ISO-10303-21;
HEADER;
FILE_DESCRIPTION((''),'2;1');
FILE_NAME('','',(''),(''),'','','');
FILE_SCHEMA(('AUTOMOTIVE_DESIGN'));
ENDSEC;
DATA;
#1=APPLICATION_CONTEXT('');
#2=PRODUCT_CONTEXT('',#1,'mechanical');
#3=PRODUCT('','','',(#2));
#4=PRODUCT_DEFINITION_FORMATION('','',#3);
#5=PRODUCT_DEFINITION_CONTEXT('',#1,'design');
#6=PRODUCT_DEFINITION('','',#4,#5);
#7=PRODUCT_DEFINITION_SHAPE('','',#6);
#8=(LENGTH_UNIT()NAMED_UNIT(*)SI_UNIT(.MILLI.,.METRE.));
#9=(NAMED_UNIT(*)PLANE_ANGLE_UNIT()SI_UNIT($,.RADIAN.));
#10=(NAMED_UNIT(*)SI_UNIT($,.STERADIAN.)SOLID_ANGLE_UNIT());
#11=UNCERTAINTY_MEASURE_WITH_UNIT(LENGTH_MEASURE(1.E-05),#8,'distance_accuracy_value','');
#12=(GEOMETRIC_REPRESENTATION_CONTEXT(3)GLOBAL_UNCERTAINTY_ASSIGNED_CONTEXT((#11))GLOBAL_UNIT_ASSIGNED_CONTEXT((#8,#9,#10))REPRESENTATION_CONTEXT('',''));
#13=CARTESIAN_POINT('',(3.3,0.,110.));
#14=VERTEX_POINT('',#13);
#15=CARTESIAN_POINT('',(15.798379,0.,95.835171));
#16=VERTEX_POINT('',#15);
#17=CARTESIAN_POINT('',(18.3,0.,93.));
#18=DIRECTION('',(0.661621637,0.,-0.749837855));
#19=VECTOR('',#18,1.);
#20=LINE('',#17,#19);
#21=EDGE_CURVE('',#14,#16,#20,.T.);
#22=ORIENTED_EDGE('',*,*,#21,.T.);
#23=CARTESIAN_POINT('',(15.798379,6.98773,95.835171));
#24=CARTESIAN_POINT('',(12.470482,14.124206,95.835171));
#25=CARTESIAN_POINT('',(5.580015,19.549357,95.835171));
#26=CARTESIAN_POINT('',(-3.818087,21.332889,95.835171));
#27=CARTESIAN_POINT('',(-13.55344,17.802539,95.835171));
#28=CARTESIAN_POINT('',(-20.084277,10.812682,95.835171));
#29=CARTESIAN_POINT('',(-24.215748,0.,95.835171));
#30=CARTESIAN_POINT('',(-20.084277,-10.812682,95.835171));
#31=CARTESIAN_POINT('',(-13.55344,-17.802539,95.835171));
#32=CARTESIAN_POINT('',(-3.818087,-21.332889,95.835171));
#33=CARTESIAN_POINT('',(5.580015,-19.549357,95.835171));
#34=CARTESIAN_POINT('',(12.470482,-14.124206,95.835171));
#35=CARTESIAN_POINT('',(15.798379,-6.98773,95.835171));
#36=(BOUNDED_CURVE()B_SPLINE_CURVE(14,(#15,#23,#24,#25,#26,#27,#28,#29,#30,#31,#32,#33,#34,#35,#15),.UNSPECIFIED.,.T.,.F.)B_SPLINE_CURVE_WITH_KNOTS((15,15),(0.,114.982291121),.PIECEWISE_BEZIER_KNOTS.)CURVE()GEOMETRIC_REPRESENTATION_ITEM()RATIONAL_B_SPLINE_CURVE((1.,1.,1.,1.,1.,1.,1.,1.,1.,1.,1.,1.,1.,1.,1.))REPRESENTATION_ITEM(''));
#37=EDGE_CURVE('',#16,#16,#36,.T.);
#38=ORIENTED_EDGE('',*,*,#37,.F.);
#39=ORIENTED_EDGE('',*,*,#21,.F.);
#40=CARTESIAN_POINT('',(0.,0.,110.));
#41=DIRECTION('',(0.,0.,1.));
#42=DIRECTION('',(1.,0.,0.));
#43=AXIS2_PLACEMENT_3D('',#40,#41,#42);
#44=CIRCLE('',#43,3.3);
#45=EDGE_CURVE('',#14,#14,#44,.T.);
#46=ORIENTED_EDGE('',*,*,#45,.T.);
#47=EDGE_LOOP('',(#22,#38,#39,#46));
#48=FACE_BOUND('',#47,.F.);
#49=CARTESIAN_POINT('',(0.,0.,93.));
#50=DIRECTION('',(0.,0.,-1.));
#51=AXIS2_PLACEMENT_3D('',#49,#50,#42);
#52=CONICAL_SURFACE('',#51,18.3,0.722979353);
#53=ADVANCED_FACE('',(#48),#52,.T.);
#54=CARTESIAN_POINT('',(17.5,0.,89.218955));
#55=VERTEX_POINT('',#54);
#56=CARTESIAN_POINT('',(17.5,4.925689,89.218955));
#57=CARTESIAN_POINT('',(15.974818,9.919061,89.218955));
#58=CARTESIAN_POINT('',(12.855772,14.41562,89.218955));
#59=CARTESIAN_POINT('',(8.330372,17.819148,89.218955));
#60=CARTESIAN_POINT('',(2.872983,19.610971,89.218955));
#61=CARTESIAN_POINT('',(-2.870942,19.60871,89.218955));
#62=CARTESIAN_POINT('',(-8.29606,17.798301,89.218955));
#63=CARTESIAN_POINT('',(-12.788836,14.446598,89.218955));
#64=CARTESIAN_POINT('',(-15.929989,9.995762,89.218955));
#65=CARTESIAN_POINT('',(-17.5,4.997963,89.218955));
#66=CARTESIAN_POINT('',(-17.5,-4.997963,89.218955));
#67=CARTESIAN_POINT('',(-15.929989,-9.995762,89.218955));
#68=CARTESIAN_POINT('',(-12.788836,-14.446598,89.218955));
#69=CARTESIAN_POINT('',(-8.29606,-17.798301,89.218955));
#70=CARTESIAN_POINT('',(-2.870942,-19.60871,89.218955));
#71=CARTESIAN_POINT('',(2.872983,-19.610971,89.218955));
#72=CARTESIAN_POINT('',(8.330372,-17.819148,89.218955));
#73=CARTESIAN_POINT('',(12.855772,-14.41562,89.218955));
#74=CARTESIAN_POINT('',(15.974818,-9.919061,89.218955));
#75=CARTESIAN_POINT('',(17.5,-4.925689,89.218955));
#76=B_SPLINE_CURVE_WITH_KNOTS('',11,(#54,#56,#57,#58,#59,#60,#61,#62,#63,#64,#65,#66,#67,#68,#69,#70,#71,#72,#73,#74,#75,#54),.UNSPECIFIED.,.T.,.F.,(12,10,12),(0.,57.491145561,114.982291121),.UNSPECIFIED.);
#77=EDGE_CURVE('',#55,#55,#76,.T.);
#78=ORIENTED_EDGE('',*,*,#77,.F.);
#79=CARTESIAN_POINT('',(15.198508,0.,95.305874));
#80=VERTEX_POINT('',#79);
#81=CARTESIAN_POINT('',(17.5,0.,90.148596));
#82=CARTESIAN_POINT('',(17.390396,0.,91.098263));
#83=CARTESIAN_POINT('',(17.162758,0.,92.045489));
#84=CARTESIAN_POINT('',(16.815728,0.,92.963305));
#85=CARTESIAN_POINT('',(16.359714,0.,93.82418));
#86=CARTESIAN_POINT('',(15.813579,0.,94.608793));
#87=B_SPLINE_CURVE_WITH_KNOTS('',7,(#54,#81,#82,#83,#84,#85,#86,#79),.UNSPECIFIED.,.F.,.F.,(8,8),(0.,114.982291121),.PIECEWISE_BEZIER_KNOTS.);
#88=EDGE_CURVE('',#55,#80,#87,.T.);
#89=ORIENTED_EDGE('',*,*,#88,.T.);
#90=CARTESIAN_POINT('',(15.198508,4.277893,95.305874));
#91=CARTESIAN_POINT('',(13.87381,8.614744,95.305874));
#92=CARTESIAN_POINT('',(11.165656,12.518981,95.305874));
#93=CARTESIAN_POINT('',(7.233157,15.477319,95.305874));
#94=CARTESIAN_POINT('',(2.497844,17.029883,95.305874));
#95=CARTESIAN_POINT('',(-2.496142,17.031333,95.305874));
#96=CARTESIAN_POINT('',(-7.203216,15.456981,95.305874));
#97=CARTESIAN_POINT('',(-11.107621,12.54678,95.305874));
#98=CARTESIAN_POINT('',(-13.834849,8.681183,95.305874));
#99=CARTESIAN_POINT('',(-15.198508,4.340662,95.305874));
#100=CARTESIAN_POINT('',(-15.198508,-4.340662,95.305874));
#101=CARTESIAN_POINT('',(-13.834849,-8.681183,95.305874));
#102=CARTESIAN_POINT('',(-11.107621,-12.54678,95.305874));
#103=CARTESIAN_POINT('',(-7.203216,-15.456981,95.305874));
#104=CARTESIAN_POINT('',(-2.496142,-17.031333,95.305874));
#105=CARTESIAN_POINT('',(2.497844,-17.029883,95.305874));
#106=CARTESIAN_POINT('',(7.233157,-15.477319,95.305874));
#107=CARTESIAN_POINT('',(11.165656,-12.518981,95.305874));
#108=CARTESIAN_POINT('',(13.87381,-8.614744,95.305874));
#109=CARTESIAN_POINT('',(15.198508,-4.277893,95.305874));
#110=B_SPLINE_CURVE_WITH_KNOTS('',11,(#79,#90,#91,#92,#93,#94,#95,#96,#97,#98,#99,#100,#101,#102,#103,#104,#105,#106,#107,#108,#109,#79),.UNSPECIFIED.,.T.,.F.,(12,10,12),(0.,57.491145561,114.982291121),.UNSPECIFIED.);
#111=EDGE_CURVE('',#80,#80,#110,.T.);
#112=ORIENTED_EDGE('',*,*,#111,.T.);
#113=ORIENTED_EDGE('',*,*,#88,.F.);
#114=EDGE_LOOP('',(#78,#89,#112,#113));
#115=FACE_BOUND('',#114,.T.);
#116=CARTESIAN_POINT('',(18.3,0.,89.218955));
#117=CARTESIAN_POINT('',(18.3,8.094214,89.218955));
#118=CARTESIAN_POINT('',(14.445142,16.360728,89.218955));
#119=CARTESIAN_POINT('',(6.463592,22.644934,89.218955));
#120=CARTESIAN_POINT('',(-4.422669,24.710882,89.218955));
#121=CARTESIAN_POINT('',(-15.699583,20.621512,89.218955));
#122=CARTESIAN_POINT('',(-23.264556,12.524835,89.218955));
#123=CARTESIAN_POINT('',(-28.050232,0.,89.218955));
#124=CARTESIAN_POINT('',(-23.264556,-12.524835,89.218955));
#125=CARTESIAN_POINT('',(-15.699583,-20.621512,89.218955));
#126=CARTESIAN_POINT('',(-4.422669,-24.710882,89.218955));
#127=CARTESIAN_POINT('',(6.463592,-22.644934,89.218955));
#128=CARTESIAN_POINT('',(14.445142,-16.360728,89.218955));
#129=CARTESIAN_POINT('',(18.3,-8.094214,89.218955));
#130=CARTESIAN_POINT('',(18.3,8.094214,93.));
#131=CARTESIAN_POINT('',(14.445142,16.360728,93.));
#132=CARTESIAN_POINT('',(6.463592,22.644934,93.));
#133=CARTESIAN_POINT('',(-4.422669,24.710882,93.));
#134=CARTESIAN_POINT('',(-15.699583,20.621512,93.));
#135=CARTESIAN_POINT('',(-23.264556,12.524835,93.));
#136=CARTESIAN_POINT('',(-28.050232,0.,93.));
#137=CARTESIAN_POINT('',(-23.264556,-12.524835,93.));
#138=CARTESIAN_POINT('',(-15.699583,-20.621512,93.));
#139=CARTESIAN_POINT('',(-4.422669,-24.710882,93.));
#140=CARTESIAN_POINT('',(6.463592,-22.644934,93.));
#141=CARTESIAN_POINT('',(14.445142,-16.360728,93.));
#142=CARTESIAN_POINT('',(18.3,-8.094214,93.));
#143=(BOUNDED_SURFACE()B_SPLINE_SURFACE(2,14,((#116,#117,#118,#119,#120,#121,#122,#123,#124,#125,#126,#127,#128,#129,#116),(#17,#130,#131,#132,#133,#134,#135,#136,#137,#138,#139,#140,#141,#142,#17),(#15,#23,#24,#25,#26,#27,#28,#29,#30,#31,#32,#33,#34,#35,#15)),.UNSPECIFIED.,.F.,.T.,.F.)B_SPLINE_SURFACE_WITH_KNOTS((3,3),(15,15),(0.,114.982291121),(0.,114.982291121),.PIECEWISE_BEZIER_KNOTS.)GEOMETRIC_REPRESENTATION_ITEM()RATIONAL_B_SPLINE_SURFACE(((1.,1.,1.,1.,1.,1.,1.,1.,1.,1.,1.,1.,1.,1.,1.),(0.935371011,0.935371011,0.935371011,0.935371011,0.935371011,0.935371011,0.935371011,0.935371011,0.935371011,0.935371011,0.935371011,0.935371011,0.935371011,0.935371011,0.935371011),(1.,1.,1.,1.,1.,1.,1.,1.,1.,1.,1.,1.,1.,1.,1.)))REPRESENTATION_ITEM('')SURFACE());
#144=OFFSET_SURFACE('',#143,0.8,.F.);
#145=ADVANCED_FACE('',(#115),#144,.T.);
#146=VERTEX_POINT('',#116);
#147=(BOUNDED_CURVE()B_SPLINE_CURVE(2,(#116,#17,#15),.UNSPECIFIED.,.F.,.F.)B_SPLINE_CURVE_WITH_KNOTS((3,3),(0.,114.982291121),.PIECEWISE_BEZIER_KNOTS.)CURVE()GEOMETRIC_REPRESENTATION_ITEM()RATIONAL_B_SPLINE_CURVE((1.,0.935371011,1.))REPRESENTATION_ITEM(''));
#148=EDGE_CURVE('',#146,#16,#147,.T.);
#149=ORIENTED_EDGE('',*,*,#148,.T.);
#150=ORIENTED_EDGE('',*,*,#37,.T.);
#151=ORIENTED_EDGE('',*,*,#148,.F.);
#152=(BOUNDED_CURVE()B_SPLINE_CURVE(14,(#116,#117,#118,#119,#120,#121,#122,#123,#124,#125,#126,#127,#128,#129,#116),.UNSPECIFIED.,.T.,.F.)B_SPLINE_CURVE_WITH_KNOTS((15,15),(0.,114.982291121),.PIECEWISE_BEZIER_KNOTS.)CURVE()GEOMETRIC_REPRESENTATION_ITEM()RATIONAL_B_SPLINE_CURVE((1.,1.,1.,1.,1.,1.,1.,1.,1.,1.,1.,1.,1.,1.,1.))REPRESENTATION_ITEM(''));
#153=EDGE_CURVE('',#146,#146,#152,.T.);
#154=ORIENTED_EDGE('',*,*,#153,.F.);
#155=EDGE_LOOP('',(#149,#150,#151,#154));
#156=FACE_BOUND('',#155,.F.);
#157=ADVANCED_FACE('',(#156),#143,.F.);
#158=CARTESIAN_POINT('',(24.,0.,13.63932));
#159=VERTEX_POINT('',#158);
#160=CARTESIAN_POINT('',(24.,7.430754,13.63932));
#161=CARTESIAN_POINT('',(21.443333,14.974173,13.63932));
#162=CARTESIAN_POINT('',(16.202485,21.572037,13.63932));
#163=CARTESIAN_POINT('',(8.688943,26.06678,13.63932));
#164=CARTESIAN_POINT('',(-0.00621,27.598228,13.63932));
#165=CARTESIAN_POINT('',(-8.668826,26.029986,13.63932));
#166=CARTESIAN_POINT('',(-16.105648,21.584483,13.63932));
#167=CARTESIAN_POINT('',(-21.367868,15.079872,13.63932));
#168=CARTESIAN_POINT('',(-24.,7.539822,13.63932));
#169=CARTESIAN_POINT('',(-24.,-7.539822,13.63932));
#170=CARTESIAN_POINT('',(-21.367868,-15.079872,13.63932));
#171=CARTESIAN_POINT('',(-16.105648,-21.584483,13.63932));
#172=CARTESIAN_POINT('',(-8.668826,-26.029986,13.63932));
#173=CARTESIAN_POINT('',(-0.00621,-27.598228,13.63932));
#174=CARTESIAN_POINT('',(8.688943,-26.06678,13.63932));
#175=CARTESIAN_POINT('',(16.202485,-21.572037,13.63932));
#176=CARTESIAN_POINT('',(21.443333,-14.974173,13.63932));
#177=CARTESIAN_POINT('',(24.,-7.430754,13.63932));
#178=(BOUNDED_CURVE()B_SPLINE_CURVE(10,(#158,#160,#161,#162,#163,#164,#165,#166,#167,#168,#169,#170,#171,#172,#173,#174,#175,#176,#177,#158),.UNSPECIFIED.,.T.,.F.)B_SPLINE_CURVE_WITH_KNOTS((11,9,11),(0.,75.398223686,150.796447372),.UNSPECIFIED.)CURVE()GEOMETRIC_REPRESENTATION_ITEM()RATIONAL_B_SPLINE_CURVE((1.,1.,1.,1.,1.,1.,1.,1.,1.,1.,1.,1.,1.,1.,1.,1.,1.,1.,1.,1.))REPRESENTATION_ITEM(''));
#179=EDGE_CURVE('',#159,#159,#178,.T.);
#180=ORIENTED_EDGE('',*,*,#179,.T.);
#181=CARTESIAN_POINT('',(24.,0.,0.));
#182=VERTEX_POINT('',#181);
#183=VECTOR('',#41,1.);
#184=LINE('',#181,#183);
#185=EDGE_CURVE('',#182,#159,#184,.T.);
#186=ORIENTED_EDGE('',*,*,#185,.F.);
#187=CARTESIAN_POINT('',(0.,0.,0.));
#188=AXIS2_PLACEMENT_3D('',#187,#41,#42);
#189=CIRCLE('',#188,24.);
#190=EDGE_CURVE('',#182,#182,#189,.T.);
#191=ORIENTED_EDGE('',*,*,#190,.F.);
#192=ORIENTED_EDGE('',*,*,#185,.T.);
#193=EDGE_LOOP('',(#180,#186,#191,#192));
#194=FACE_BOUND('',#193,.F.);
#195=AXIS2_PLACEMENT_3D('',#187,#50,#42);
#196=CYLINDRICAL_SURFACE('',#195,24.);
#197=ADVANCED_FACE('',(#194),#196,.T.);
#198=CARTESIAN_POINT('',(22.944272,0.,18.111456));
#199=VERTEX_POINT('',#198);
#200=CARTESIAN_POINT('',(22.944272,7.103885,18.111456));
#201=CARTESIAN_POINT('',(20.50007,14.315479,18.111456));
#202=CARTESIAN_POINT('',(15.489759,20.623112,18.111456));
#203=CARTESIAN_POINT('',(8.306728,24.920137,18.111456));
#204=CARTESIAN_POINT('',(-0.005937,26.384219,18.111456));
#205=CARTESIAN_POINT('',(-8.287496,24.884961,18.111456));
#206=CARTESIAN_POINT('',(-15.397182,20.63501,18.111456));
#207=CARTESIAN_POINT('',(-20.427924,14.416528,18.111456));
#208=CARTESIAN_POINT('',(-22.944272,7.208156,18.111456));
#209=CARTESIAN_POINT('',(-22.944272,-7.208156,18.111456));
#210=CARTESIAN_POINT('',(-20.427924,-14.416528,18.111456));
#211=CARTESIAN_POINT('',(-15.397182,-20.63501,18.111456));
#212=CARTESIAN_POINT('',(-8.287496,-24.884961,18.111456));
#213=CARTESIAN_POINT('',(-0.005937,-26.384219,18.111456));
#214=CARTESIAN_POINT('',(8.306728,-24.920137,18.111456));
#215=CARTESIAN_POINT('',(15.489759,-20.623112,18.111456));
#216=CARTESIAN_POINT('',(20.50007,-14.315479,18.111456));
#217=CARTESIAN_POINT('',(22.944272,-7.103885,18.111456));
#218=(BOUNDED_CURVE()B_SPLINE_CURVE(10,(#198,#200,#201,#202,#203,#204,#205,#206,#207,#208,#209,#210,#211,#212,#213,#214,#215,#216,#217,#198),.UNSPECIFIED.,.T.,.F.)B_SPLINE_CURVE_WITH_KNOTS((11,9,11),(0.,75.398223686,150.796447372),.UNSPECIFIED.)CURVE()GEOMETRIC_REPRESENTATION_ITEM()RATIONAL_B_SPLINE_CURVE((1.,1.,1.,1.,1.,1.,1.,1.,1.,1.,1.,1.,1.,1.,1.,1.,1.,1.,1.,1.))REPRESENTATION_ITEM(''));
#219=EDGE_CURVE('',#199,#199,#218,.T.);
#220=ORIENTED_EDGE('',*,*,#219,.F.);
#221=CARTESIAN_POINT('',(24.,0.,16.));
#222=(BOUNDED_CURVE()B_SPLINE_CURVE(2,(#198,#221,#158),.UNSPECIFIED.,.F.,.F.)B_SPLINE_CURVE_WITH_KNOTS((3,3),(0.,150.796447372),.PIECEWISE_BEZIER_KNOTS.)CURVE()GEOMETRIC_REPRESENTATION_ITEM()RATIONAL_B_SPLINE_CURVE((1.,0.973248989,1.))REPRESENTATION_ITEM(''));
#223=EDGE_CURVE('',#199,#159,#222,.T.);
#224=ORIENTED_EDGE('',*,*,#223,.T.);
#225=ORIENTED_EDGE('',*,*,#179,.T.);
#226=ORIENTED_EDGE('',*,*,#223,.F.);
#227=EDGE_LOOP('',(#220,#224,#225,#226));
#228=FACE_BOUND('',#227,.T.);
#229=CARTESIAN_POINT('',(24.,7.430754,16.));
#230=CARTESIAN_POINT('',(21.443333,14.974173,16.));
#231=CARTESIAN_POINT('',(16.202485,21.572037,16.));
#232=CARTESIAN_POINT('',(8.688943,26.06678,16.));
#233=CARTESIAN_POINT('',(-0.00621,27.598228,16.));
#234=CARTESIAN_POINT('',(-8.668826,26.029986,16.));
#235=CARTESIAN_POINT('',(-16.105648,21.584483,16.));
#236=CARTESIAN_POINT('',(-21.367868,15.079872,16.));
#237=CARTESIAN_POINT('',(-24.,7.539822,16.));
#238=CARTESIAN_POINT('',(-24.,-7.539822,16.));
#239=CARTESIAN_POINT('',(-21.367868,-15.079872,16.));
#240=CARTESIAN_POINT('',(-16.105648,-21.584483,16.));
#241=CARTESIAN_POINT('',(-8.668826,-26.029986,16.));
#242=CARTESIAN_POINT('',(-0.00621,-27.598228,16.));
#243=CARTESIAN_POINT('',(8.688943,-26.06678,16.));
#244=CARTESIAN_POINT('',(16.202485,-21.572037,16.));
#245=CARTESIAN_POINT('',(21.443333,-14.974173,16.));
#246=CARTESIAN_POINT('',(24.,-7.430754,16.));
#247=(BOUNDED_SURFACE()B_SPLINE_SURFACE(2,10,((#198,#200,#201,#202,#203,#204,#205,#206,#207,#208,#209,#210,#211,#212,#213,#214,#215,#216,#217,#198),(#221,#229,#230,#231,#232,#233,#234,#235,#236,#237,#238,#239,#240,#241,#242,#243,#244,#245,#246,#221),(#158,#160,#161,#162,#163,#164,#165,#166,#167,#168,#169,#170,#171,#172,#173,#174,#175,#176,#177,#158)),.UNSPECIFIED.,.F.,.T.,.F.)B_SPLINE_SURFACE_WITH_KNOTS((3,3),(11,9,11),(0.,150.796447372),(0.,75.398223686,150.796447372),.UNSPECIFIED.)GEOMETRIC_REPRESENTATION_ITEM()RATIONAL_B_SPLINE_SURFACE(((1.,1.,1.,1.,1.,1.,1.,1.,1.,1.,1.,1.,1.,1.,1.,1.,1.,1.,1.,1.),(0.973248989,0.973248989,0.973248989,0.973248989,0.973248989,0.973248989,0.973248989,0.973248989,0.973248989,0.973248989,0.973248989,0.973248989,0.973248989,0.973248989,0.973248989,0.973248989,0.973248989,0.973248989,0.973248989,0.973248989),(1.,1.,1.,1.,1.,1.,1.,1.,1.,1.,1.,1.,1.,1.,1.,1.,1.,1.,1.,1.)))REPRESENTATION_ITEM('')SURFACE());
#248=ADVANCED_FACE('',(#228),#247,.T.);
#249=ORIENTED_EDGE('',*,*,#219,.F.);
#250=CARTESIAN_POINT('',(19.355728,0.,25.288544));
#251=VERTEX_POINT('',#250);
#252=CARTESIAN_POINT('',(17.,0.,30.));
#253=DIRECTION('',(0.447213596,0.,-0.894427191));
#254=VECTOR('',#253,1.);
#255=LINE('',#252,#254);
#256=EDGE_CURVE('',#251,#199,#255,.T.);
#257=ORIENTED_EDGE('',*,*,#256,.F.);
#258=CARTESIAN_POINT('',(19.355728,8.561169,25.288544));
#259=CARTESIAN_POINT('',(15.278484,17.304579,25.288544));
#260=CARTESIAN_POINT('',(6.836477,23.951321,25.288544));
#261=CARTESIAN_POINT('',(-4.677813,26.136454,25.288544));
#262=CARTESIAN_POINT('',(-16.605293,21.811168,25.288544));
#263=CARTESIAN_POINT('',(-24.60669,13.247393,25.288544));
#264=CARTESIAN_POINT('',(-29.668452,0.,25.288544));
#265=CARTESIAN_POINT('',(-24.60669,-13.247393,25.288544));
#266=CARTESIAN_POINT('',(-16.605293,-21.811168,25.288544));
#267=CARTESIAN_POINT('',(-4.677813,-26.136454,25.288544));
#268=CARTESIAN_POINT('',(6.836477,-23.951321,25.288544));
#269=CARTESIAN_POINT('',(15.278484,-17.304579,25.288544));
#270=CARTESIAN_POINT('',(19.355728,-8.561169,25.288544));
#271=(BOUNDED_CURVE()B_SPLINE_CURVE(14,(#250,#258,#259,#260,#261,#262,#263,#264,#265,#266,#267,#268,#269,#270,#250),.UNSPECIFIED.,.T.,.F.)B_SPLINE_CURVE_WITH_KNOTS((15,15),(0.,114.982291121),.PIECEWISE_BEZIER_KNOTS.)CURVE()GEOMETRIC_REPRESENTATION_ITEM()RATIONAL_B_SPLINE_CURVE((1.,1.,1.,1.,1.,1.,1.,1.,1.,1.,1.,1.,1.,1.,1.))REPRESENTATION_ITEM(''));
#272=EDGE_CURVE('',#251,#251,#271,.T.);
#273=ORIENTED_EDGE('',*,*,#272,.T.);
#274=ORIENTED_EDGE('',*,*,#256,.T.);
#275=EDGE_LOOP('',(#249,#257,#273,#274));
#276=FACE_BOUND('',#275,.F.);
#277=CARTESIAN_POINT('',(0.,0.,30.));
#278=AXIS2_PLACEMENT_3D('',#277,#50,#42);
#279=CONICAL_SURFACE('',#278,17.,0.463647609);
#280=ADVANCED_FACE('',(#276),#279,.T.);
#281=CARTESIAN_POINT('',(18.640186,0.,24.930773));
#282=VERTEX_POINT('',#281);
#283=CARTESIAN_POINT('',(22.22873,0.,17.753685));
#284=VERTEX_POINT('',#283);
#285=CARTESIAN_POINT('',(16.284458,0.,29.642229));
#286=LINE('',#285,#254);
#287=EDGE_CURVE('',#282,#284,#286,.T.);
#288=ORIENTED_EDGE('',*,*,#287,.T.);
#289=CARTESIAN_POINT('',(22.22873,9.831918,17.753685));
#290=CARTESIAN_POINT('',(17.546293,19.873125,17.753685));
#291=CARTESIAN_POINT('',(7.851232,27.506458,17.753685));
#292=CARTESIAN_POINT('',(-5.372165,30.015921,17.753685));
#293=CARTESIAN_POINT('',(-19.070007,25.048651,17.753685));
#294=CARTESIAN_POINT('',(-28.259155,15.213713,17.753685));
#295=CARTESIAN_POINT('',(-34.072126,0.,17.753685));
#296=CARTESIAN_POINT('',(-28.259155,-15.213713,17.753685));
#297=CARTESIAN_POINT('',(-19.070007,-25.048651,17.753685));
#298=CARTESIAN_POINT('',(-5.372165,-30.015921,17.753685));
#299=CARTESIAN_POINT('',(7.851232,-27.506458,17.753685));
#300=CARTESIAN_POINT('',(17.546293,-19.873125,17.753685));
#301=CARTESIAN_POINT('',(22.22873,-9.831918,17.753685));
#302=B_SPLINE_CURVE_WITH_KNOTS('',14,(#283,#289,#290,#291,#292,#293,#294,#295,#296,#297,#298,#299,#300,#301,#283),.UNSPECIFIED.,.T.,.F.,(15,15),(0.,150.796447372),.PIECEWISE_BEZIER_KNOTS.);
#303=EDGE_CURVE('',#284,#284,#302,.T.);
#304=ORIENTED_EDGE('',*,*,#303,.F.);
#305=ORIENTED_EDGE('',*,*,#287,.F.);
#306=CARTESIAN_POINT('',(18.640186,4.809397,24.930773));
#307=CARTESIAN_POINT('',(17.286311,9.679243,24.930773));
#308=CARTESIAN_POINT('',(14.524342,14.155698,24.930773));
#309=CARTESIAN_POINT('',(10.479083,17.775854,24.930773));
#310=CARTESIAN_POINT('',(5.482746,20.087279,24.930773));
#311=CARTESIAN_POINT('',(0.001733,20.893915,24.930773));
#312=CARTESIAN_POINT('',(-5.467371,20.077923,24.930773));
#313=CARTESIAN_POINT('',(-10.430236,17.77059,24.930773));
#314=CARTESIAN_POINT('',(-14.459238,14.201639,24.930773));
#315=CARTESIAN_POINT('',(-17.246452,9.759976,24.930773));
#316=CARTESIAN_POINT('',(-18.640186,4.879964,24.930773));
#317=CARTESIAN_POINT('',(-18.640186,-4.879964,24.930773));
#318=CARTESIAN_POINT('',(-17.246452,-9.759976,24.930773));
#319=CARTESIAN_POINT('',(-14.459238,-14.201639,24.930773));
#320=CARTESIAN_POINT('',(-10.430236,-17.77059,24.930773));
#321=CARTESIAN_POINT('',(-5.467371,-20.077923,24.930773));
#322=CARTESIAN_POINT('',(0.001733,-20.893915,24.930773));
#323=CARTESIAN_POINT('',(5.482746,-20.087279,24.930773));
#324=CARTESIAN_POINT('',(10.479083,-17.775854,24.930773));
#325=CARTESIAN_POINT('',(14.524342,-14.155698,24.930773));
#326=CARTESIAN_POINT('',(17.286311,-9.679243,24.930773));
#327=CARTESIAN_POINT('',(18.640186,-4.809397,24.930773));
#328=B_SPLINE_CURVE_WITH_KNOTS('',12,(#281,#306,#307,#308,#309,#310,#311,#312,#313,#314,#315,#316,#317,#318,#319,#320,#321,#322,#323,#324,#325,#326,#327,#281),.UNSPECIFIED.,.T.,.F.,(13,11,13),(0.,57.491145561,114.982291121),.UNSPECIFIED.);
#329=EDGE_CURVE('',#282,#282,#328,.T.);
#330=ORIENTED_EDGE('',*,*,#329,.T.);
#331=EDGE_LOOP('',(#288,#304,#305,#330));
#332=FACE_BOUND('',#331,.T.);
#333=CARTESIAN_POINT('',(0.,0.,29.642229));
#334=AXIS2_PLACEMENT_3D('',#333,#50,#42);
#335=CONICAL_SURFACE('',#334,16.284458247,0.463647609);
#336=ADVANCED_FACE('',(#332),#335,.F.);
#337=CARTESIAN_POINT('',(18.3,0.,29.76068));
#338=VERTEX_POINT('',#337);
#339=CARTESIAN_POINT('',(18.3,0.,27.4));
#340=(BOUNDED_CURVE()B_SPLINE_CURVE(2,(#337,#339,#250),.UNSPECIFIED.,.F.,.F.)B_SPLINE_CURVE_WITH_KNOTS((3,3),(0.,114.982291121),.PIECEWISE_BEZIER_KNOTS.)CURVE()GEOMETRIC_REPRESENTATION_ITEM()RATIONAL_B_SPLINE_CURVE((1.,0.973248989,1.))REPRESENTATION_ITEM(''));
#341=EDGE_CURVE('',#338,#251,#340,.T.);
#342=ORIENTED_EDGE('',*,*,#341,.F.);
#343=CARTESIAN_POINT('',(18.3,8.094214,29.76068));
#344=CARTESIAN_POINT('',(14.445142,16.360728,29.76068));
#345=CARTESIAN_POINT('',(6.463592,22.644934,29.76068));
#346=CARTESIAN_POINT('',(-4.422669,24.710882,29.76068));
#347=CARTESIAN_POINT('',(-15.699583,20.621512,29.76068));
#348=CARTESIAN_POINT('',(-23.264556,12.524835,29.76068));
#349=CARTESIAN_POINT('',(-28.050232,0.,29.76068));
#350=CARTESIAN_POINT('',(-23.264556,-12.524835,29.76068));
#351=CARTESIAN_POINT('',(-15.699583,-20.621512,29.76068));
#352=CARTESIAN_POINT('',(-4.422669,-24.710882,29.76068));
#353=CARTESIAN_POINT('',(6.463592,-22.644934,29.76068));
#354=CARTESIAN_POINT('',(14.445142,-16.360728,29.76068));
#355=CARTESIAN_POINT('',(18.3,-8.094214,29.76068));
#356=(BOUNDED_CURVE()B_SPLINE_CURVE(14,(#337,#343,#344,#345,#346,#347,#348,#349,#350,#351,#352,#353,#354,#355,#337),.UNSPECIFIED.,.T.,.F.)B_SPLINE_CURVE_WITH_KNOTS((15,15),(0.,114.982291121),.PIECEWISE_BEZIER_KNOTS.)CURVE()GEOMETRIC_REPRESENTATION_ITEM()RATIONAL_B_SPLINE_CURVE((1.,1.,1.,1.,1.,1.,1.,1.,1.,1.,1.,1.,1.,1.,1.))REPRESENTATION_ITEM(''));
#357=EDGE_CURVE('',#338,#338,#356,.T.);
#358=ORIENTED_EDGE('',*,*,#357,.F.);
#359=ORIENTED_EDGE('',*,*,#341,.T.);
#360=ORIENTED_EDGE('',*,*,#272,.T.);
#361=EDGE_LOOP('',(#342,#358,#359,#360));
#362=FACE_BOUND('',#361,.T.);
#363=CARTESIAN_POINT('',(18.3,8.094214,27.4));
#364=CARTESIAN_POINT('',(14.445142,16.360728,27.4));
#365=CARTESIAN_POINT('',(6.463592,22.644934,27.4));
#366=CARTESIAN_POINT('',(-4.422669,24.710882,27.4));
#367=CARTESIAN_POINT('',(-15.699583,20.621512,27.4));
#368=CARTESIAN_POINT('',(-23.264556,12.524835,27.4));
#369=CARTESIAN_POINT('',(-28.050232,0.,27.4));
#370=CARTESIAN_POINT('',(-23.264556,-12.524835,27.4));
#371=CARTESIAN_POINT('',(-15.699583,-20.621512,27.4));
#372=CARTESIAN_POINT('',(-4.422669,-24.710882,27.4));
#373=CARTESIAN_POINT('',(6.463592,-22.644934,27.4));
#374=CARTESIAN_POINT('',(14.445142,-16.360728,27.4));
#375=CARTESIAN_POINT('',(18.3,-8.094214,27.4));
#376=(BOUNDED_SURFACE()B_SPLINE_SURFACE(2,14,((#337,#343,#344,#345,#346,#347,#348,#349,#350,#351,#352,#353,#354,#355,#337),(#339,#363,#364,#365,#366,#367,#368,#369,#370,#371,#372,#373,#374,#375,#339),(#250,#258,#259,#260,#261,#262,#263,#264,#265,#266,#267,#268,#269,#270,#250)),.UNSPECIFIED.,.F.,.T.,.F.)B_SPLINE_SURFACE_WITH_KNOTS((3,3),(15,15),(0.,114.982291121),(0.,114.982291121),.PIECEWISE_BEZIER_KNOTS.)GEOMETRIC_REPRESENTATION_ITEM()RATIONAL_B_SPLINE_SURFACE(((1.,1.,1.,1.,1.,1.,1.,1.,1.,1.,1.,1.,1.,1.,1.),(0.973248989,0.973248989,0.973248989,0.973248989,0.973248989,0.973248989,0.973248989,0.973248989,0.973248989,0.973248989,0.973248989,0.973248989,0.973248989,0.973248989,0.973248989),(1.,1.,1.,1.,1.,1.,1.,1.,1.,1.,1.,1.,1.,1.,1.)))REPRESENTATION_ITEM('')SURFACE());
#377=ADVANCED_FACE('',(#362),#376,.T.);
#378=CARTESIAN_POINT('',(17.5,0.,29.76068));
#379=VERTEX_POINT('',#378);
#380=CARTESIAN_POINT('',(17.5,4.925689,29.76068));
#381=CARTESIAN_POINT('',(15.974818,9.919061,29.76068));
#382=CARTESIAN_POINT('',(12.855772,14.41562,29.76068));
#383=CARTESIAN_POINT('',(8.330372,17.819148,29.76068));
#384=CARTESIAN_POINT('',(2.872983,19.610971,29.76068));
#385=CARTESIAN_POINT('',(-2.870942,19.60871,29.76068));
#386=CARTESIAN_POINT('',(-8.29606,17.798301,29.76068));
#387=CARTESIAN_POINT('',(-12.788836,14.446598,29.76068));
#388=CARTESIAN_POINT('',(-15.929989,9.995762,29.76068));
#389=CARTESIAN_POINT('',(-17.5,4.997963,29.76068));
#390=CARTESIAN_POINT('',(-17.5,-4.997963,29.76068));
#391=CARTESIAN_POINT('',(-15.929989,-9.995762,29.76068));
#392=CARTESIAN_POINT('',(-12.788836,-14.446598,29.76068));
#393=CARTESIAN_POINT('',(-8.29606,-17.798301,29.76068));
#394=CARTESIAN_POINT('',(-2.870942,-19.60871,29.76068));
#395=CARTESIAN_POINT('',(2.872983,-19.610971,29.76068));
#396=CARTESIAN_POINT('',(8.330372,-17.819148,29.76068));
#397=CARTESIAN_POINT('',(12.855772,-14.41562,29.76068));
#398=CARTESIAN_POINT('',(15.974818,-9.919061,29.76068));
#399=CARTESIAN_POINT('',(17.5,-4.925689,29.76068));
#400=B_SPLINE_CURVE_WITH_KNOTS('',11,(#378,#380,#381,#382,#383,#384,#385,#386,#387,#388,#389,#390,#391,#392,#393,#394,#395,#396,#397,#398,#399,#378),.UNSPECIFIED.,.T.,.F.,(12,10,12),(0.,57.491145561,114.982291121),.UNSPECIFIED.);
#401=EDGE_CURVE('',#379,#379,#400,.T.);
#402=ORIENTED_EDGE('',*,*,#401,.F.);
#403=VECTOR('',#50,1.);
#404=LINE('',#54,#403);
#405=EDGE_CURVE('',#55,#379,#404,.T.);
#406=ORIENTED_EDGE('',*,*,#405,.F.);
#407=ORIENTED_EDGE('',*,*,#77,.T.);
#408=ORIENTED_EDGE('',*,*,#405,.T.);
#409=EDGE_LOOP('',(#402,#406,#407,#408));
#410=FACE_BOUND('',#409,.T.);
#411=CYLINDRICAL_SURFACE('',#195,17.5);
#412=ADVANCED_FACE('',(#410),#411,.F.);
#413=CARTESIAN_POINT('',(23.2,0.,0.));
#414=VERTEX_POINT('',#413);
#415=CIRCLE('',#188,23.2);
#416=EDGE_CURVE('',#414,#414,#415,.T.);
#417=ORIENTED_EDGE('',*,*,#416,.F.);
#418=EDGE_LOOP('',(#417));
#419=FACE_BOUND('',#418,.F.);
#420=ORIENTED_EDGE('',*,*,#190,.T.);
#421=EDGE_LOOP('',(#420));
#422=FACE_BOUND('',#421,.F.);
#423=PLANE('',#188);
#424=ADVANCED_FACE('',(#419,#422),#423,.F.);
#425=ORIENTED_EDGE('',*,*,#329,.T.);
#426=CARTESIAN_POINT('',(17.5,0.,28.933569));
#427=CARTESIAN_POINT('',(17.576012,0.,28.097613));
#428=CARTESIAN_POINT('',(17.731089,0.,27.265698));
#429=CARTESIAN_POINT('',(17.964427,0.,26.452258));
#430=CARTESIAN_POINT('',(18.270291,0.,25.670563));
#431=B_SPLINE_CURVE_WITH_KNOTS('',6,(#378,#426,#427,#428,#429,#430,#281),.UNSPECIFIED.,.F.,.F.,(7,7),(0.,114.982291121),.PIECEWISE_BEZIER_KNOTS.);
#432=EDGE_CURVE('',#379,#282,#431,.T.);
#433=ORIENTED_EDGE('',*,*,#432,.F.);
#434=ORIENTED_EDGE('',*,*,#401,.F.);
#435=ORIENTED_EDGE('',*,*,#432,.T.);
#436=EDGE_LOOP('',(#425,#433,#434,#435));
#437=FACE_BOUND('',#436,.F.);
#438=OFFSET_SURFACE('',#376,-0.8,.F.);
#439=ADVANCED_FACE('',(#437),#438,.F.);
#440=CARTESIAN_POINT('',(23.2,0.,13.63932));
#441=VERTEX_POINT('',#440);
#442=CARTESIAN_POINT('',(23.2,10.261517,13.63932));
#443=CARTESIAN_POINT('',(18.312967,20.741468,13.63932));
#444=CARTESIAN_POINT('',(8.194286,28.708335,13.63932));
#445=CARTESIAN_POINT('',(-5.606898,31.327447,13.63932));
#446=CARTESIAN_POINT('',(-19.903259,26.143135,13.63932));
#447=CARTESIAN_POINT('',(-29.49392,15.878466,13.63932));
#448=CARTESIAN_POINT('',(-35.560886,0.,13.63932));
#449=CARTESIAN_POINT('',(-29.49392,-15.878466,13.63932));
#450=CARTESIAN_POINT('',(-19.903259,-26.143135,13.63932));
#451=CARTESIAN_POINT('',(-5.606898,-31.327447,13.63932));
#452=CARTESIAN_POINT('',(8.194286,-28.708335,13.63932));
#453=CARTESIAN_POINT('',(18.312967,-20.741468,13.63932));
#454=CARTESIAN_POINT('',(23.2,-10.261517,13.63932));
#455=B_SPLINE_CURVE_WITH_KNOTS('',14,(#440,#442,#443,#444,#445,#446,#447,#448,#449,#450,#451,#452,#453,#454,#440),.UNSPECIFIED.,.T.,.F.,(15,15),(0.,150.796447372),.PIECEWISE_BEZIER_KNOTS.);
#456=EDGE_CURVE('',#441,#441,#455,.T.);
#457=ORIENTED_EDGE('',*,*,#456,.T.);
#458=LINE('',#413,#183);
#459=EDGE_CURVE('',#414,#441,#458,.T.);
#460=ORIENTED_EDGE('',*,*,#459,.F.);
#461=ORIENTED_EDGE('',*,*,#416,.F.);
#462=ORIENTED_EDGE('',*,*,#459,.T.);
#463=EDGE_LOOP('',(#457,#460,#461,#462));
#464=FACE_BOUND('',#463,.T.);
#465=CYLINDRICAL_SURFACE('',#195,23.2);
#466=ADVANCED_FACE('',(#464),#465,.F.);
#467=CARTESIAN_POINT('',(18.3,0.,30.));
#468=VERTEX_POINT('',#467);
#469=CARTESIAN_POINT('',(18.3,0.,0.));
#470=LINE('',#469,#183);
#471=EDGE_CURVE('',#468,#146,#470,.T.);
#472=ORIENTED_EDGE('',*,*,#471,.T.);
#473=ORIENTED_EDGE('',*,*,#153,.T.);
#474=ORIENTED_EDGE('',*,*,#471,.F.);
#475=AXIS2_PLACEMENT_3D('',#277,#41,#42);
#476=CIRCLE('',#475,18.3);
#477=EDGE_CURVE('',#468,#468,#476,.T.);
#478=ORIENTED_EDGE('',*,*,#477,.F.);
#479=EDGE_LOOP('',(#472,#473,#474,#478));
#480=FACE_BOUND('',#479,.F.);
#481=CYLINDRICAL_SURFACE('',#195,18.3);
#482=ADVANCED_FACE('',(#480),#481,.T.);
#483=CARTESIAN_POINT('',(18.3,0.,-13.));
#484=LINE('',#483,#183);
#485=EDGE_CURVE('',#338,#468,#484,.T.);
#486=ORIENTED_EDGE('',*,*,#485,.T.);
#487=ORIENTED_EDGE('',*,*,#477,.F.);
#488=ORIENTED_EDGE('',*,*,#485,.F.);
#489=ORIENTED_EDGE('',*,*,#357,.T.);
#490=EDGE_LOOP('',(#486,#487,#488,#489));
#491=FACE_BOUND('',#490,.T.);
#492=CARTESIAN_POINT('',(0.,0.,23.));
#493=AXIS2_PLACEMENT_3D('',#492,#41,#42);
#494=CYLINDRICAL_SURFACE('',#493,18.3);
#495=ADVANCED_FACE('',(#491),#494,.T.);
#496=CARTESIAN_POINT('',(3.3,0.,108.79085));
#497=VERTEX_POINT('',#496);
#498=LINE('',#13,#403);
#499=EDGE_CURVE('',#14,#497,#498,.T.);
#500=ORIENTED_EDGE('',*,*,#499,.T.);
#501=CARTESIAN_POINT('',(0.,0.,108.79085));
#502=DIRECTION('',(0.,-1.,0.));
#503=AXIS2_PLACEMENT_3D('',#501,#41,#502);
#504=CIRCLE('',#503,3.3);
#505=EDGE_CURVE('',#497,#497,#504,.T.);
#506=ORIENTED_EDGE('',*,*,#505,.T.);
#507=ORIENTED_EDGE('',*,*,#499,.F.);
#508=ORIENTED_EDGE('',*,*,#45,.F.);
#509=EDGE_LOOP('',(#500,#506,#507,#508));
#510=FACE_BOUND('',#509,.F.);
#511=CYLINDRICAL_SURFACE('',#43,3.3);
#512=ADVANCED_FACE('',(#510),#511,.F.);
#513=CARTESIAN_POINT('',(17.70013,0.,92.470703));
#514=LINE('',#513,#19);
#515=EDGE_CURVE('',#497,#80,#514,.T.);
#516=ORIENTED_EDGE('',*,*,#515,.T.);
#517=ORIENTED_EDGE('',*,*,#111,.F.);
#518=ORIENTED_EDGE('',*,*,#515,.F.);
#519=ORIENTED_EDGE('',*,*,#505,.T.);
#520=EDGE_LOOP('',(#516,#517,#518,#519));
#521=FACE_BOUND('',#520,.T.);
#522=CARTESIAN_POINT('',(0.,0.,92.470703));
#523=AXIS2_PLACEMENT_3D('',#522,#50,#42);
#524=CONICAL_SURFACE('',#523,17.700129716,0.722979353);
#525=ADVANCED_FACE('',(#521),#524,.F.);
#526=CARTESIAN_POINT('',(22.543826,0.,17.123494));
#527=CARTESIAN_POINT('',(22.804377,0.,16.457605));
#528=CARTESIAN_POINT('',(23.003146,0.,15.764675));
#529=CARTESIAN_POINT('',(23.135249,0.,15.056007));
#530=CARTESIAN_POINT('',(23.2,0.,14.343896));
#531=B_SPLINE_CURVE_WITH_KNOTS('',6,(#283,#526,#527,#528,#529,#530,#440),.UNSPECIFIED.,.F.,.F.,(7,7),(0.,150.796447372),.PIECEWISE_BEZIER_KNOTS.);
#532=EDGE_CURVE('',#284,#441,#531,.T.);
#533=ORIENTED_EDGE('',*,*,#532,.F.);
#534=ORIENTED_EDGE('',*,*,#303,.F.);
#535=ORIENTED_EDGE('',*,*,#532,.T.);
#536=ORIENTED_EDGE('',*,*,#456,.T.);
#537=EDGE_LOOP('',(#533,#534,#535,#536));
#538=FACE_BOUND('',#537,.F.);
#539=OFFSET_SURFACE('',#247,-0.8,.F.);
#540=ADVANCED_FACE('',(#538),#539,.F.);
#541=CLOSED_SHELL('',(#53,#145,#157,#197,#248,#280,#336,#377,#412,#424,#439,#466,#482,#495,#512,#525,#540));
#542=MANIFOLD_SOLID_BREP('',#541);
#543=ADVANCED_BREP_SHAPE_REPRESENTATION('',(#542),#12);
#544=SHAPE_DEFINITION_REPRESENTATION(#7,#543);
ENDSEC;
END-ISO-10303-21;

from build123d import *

# Parameters (mm, degrees)
F0_R        = 18.3
F1_DEPTH    = 110
F0_R_2      = 24
F0_R_3      = 19.5
F2_DEPTH    = 30
F3_S5_R     = 18.3
F3_T6_DEPTH = 36
F4_SIZE2    = 17
F4_SIZE     = 15
F5_R        = 10
F6_T        = -0.8
F7_DEPTH    = 25


# Not quite as in the source:
# - a fillet or chamfer that OpenCascade refuses, or shapes differently, is made with other operations: its cross-section is extruded or revolved along the edge and cut away or added


with BuildPart() as f1:
    # F0 (on Top) → F1 (new body)
    with BuildSketch(Plane.XY):
        Circle(F0_R)
    extrude(amount=F1_DEPTH)

    # F0 (on Top) → F2 (join)
    with BuildSketch(Plane.XY):
        Circle(F0_R_2)
        Circle(F0_R_3, mode=Mode.SUBTRACT)
        Circle(F0_R_3)
        Circle(F0_R, mode=Mode.SUBTRACT)
    extrude(amount=F2_DEPTH)

    # F3: chamfer of 7 x 14 on 1 edges, made by hand


with BuildPart() as f3_tool2:
    # F3_s3 → F3_t4 (revolve)
    with BuildSketch(Plane.XZ):
        Polygon((17, 30), (24, 16), (24, 30), align=None)
    revolve(axis=Axis((0, 0, 30), (0, 0, 1)))

    # F3_s5 → F3_t6 (cut, symmetric)
    with BuildSketch(Plane.XY.offset(23)):
        Circle(F3_S5_R)
    extrude(amount=F3_T6_DEPTH, both=True, mode=Mode.SUBTRACT)


with BuildPart() as f1_1:
    add(f1.part)

    # F3_t1: cut F3_tool2
    add(f3_tool2.part, mode=Mode.SUBTRACT)

    # F4
    f4_edges = [f1_1.edges().sort_by_distance(p)[0] for p in [
        (-18.3, 0, 110),
    ]]
    f4_side = f1_1.faces().sort_by_distance((0, 0, 110))[0]
    chamfer(f4_edges, length=F4_SIZE, length2=F4_SIZE2, reference=f4_side)

    # F5
    f5_edges = [f1_1.edges().sort_by_distance(p)[0] for p in [
        (-18.3, 0, 93),
        (-18.3, 0, 30),
        (-18.3, 0, 27.4),
        (-24, 0, 16),
    ]]
    fillet(f5_edges, radius=F5_R)

    # F6
    f6_openings = [f1_1.faces().sort_by_distance(p)[0] for p in [
        (0, 0, 0),
    ]]
    offset(amount=F6_T, openings=f6_openings)

    # F7 (cut): a face of the model
    f7_faces = [f1_1.faces().sort_by_distance(p)[0] for p in [
        (0, 0, 110),
    ]]
    extrude(f7_faces, amount=-F7_DEPTH, mode=Mode.SUBTRACT)


solid = f1_1.part
